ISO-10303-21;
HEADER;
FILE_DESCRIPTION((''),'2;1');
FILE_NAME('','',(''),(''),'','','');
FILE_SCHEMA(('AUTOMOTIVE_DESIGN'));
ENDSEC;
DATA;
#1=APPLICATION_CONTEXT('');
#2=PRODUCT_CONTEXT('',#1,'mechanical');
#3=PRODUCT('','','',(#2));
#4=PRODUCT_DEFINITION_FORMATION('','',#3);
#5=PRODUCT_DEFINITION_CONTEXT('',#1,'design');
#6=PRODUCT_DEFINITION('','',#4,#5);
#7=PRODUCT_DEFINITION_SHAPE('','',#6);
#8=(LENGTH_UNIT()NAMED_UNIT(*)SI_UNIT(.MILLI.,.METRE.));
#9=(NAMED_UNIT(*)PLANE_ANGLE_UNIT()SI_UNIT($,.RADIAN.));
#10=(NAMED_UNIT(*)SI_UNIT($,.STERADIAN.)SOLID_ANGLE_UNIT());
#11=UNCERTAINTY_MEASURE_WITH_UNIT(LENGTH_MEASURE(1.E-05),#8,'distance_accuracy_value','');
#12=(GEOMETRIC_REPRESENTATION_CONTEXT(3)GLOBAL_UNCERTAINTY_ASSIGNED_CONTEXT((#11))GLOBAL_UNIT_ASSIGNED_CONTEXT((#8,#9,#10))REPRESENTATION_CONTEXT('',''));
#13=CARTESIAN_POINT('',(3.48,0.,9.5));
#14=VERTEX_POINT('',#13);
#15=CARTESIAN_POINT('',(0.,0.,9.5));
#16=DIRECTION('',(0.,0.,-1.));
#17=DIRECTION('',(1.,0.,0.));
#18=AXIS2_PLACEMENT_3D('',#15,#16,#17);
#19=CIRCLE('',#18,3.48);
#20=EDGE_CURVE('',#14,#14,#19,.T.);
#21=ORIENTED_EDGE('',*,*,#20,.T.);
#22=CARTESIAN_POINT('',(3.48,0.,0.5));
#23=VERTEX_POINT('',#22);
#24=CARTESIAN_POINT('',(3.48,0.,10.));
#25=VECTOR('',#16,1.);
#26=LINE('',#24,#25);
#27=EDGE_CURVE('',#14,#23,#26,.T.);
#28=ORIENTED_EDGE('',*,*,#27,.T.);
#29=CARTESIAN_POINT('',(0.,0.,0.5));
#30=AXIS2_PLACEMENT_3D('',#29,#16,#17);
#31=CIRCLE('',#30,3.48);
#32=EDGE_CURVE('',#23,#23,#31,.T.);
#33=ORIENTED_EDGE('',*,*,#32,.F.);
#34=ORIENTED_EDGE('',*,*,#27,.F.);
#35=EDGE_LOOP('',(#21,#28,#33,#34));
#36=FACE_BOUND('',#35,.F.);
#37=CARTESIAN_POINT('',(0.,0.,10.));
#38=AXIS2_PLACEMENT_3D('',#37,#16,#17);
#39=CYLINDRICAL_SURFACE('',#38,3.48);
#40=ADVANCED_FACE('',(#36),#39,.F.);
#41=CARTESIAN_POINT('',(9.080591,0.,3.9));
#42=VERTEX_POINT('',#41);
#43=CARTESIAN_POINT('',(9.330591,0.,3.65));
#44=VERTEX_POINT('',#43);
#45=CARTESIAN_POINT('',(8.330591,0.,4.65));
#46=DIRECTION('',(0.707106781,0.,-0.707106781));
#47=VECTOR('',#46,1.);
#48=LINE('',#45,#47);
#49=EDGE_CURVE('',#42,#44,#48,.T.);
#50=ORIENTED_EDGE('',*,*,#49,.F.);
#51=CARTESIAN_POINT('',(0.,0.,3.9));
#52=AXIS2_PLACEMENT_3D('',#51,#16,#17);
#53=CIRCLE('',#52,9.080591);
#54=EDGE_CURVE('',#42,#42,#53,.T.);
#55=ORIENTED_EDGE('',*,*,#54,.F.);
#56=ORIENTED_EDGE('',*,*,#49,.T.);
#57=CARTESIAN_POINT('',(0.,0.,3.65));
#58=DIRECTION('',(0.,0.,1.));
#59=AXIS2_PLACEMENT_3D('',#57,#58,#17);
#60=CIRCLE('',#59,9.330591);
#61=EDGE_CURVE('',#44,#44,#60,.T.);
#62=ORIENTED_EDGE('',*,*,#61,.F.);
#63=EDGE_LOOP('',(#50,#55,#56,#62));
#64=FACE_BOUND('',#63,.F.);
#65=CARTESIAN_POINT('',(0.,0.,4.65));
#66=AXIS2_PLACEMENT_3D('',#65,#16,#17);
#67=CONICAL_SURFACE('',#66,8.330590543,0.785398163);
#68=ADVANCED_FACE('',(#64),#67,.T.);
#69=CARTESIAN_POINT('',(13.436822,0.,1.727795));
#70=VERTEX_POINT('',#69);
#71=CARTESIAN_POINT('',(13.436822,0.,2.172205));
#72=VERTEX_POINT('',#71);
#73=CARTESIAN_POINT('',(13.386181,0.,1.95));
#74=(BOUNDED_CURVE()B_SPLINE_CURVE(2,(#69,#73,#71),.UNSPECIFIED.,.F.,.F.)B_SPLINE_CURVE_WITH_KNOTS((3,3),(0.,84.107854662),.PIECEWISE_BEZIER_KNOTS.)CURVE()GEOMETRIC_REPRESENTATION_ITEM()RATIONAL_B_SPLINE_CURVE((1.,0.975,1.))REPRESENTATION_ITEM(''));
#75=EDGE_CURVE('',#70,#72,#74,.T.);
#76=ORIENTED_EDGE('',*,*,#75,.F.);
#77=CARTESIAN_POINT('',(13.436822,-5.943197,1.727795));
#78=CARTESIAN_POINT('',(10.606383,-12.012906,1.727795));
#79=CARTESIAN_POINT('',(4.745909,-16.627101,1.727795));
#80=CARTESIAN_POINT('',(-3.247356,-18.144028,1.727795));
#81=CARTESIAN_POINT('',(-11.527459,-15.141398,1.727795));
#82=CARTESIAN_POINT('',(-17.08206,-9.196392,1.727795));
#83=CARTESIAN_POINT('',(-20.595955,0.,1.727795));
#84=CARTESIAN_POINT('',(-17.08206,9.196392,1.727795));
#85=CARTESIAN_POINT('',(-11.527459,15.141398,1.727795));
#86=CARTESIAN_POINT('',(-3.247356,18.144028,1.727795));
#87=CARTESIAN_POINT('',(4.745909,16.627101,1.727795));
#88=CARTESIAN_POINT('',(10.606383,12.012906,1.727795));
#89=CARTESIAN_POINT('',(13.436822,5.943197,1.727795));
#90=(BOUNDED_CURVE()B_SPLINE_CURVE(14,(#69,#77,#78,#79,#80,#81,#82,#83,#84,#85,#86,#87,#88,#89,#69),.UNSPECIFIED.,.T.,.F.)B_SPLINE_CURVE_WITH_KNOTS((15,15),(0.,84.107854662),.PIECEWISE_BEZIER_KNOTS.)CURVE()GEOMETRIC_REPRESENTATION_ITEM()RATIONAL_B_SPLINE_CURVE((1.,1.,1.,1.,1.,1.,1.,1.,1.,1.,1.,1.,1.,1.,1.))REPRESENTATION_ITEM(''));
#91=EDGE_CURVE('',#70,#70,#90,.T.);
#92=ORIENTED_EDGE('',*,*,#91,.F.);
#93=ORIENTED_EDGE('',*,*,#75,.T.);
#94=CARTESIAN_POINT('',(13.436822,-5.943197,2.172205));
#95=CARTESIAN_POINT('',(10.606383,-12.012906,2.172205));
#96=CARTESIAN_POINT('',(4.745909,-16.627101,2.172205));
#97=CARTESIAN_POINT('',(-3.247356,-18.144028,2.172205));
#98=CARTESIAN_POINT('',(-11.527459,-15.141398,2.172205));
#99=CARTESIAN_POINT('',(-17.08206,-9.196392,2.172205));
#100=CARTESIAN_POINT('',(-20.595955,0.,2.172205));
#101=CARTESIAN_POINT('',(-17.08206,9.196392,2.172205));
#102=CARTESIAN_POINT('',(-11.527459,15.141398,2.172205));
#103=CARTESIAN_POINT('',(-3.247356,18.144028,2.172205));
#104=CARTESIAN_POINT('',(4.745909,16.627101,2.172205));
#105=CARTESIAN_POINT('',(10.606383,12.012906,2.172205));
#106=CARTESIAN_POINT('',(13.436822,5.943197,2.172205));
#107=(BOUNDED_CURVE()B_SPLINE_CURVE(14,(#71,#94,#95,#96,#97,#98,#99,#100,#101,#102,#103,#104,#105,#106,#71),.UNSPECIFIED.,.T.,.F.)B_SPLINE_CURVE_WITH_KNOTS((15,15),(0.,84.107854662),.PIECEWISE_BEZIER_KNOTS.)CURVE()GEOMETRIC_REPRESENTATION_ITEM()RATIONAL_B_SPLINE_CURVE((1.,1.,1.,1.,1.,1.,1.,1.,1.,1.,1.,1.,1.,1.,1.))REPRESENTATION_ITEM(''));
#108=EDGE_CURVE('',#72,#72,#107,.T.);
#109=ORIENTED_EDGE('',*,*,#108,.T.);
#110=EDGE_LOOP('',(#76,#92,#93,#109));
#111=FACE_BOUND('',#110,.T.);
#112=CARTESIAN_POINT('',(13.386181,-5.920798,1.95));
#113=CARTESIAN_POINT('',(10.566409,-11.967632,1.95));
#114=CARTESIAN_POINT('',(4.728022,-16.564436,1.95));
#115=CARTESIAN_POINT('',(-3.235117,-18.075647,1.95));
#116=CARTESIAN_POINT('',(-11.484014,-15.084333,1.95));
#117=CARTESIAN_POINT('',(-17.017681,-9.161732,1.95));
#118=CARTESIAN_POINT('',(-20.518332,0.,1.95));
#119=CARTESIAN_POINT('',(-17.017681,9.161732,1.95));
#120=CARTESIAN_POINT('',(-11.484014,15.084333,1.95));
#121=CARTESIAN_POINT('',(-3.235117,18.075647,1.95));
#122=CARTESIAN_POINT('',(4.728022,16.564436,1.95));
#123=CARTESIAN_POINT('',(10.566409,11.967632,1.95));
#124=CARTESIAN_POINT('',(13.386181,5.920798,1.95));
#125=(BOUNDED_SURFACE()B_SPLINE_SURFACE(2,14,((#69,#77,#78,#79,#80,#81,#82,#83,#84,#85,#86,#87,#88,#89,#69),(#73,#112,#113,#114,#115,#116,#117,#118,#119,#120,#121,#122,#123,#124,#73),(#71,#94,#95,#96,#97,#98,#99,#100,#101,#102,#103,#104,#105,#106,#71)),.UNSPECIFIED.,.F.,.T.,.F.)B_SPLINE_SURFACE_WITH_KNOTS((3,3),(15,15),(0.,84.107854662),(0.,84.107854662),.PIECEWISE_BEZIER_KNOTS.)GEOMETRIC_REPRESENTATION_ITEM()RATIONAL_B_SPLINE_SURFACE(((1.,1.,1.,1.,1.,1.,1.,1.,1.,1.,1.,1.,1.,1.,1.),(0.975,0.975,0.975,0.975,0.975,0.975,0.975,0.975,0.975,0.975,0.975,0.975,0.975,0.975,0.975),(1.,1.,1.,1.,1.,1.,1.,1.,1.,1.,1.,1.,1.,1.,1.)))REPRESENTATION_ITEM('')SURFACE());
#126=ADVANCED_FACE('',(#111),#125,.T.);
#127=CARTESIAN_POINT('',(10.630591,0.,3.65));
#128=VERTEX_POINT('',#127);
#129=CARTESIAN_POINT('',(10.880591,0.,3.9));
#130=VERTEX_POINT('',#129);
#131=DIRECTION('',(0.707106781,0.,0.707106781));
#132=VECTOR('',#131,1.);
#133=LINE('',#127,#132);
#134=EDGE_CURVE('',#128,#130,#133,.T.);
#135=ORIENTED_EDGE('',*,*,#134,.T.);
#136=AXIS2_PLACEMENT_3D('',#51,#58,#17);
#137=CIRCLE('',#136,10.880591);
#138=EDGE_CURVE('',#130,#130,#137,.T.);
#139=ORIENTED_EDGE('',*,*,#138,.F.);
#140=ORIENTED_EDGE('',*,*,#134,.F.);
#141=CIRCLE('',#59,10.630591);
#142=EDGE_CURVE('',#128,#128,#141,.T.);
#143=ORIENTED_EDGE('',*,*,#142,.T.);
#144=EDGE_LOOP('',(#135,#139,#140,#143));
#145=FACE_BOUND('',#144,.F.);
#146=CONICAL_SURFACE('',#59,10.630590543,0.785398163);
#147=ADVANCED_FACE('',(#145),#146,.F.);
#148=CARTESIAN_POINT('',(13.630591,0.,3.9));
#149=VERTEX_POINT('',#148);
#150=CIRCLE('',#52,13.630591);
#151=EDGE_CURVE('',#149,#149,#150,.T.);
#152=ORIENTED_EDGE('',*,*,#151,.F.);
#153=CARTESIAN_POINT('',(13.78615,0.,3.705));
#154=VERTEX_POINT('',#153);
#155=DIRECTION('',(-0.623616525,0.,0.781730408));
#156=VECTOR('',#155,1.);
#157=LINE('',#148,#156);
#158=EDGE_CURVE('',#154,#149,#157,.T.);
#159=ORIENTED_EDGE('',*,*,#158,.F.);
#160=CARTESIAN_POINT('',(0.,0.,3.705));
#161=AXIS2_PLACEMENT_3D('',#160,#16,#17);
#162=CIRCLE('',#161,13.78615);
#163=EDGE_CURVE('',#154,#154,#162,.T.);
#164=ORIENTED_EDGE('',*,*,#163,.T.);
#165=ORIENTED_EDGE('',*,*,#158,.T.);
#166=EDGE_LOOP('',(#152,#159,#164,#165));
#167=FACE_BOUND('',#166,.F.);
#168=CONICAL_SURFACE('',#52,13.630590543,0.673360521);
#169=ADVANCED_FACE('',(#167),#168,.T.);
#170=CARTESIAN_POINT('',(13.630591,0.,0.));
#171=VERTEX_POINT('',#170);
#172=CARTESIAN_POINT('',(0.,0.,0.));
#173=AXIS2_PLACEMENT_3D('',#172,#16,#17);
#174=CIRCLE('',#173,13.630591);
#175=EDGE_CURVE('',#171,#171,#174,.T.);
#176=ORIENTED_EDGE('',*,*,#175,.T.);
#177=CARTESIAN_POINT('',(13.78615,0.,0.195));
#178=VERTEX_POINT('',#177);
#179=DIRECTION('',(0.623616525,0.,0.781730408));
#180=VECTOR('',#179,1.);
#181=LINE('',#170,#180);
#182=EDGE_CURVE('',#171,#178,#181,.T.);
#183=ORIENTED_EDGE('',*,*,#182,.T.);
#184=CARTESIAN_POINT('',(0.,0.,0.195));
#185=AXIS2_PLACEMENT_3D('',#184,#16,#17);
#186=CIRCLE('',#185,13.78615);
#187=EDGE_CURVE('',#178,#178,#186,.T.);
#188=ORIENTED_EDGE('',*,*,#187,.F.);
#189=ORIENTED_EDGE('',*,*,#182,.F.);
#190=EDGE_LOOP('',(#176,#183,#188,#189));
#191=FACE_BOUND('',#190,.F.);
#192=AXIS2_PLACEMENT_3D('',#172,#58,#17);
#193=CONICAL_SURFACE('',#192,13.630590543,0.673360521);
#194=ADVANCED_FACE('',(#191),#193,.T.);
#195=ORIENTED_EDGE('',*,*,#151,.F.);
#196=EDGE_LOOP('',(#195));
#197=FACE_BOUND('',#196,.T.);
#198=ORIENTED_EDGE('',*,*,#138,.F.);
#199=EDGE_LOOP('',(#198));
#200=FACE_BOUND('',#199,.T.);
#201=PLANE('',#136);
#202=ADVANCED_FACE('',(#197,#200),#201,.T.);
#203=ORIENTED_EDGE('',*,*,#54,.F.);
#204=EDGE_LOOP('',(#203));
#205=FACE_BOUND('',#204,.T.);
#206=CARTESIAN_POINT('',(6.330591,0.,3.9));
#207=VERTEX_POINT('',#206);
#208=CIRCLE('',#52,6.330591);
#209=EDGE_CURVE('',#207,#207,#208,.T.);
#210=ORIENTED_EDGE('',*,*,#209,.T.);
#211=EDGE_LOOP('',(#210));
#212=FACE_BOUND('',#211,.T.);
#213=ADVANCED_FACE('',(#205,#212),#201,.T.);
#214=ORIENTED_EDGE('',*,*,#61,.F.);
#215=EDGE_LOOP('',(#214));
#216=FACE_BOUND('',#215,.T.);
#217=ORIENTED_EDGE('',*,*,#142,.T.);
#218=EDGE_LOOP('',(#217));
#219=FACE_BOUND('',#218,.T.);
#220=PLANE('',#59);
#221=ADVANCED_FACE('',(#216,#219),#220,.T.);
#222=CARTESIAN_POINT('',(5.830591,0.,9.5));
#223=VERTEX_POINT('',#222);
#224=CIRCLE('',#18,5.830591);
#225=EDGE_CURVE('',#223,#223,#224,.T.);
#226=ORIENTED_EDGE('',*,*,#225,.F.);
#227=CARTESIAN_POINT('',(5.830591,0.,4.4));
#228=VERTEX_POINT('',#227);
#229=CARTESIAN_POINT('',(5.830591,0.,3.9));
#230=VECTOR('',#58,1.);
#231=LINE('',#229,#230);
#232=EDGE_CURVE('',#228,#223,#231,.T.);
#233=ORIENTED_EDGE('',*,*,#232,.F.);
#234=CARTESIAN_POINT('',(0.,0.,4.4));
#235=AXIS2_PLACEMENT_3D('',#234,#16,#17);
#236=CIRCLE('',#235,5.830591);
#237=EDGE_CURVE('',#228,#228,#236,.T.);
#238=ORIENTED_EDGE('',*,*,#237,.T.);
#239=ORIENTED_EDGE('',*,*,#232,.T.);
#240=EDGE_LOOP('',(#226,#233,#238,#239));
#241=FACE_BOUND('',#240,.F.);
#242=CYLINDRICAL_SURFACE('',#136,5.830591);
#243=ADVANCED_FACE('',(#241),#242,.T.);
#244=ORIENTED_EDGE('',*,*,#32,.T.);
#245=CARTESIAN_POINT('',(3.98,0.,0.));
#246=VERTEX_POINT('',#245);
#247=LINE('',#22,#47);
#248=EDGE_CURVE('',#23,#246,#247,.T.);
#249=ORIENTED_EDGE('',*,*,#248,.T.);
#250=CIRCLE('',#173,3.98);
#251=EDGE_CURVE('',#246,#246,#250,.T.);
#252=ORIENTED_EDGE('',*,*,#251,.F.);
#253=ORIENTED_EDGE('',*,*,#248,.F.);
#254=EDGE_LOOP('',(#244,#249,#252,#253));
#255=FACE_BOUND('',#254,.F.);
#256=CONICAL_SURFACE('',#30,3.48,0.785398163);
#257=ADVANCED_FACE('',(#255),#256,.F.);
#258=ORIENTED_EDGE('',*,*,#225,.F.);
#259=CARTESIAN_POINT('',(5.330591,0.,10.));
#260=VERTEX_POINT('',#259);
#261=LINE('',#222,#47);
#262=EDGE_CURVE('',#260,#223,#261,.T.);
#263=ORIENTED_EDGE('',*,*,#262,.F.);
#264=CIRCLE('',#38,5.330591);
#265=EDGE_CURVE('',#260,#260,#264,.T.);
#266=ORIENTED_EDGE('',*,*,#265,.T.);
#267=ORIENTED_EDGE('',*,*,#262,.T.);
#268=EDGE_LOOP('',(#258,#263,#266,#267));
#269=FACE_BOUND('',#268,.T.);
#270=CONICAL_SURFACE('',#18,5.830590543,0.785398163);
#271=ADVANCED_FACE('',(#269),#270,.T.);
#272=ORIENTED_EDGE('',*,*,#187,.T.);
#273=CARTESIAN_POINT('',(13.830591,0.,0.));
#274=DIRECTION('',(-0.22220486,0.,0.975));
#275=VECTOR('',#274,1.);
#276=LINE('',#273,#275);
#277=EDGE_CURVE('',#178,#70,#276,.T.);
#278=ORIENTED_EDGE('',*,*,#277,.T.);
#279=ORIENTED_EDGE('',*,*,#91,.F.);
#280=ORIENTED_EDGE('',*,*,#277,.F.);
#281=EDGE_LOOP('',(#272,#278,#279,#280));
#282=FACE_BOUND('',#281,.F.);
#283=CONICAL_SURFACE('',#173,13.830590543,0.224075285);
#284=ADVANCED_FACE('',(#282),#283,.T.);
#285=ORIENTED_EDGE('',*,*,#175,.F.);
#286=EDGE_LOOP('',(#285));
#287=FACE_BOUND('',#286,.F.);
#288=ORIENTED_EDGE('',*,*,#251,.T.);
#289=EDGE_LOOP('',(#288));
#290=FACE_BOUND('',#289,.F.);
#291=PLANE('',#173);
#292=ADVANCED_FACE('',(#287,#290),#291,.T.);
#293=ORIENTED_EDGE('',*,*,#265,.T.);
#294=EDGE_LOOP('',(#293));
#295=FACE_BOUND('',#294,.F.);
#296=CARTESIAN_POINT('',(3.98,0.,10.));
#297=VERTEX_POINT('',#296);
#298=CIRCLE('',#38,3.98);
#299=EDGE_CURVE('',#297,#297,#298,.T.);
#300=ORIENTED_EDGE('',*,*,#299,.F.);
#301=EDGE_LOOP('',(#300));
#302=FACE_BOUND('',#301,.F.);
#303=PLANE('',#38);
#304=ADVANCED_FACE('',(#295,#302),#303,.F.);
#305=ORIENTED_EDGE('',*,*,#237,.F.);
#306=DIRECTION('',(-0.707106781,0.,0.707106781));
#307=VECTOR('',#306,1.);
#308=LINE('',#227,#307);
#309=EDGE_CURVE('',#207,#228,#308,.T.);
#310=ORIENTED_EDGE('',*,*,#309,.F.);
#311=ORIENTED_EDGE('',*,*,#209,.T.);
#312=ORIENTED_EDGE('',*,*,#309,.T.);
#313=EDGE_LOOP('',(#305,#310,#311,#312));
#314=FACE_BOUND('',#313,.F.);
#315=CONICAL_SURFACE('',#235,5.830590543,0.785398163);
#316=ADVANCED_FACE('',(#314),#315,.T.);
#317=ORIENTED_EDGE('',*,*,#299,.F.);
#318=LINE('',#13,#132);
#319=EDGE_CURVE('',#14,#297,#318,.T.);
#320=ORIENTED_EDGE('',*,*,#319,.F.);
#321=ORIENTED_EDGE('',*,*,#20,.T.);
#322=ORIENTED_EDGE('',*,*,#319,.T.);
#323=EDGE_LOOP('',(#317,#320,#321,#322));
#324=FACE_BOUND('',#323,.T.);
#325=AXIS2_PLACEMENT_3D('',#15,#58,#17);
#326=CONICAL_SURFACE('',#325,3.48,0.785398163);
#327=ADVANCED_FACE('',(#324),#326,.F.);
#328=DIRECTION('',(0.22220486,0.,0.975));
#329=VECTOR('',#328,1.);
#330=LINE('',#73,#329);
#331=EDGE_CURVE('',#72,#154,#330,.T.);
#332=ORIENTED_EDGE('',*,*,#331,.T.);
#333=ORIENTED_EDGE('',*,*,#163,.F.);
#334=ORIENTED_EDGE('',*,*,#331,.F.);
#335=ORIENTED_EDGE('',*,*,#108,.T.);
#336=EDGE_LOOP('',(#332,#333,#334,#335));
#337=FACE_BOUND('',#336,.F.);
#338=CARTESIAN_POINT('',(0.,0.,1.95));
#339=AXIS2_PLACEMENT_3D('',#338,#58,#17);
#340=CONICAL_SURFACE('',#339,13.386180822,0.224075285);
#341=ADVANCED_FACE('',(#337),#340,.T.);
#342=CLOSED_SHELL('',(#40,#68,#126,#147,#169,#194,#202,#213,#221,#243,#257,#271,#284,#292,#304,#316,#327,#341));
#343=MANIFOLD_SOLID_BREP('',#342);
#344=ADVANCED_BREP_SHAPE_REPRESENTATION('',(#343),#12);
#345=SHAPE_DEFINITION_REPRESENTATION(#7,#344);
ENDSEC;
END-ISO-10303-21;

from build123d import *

# Parameters (mm, degrees)
F2_SIZE  = 0.2
F3_R     = 1
F4_SIZE  = 0.5
F5_SIZE  = 0.5
F6_R     = 11.6305905431
F6_R_2   = 8.3305905431
F7_DEPTH = 0.25


# Not quite as in the source:
# - a fillet or chamfer that OpenCascade refuses, or shapes differently, is made with other operations: its cross-section is extruded or revolved along the edge and cut away or added


with BuildPart() as f1:
    # F0 (on Front) → F1 (revolve)
    with BuildSketch(Plane.XZ):
        Polygon((5.8305905431, 10), (3.48, 10), (3.48, 0), (5.8305905431, 0), (13.8305905431, 0), (13.3861808223, 1.95), (13.8305905431, 3.9), (5.8305905431, 3.9), align=None)
    revolve(axis=Axis((0, 0, 13.5622331873), (0, 0, -1)))

    # F2
    f2_edges = [f1.edges().sort_by_distance(p)[0] for p in [
        (-13.830591, 0, 3.9),
        (-13.830591, 0, 0),
    ]]
    chamfer(f2_edges, length=F2_SIZE)

    # F3
    f3_edges = [f1.edges().sort_by_distance(p)[0] for p in [
        (-13.386181, 0, 1.95),
    ]]
    fillet(f3_edges, radius=F3_R)

    # F4
    f4_edges = [f1.edges().sort_by_distance(p)[0] for p in [
        (-5.830591, 0, 10),
        (-3.48, 0, 10),
        (-5.830591, 0, 3.9),
    ]]
    chamfer(f4_edges, length=F4_SIZE)

    # F5
    f5_edges = [f1.edges().sort_by_distance(p)[0] for p in [
        (-3.48, 0, 0),
    ]]
    chamfer(f5_edges, length=F5_SIZE)

    # F6 (on face) → F7 (cut)
    with BuildSketch(Plane.XY.offset(3.9)):
        Circle(F6_R)
        Circle(F6_R_2, mode=Mode.SUBTRACT)
    extrude(amount=-F7_DEPTH, mode=Mode.SUBTRACT)

    # F8: chamfer of 1 on 2 edges, made by hand


with BuildPart() as f8_tool2:
    # F8_s3 → F8_t4 (revolve)
    with BuildSketch(Plane.XZ):
        Polygon((10.6305905431, 3.65), (11.6305905431, 4.65), (11.6305905431, 3.65), align=None)
    revolve(axis=Axis((0, 0, 3.65), (0, 0, 1)))

    split(bisect_by=Plane.XY.offset(3.9), keep=Keep.BOTTOM)


with BuildPart() as f1_1:
    add(f1.part)

    # F8_t1: union F8_tool2
    add(f8_tool2.part)


with BuildPart() as f8_tool7:
    # F8_s8 → F8_t9 (revolve)
    with BuildSketch(Plane.XZ):
        Polygon((8.3305905431, 4.65), (9.3305905431, 3.65), (8.3305905431, 3.65), align=None)
    revolve(axis=Axis((0, 0, 3.65), (0, 0, 1)))

    split(bisect_by=Plane.XY.offset(3.9), keep=Keep.BOTTOM)


with BuildPart() as f1_2:
    add(f1_1.part)

    # F8_t6: union F8_tool7
    add(f8_tool7.part)


solid = f1_2.part
